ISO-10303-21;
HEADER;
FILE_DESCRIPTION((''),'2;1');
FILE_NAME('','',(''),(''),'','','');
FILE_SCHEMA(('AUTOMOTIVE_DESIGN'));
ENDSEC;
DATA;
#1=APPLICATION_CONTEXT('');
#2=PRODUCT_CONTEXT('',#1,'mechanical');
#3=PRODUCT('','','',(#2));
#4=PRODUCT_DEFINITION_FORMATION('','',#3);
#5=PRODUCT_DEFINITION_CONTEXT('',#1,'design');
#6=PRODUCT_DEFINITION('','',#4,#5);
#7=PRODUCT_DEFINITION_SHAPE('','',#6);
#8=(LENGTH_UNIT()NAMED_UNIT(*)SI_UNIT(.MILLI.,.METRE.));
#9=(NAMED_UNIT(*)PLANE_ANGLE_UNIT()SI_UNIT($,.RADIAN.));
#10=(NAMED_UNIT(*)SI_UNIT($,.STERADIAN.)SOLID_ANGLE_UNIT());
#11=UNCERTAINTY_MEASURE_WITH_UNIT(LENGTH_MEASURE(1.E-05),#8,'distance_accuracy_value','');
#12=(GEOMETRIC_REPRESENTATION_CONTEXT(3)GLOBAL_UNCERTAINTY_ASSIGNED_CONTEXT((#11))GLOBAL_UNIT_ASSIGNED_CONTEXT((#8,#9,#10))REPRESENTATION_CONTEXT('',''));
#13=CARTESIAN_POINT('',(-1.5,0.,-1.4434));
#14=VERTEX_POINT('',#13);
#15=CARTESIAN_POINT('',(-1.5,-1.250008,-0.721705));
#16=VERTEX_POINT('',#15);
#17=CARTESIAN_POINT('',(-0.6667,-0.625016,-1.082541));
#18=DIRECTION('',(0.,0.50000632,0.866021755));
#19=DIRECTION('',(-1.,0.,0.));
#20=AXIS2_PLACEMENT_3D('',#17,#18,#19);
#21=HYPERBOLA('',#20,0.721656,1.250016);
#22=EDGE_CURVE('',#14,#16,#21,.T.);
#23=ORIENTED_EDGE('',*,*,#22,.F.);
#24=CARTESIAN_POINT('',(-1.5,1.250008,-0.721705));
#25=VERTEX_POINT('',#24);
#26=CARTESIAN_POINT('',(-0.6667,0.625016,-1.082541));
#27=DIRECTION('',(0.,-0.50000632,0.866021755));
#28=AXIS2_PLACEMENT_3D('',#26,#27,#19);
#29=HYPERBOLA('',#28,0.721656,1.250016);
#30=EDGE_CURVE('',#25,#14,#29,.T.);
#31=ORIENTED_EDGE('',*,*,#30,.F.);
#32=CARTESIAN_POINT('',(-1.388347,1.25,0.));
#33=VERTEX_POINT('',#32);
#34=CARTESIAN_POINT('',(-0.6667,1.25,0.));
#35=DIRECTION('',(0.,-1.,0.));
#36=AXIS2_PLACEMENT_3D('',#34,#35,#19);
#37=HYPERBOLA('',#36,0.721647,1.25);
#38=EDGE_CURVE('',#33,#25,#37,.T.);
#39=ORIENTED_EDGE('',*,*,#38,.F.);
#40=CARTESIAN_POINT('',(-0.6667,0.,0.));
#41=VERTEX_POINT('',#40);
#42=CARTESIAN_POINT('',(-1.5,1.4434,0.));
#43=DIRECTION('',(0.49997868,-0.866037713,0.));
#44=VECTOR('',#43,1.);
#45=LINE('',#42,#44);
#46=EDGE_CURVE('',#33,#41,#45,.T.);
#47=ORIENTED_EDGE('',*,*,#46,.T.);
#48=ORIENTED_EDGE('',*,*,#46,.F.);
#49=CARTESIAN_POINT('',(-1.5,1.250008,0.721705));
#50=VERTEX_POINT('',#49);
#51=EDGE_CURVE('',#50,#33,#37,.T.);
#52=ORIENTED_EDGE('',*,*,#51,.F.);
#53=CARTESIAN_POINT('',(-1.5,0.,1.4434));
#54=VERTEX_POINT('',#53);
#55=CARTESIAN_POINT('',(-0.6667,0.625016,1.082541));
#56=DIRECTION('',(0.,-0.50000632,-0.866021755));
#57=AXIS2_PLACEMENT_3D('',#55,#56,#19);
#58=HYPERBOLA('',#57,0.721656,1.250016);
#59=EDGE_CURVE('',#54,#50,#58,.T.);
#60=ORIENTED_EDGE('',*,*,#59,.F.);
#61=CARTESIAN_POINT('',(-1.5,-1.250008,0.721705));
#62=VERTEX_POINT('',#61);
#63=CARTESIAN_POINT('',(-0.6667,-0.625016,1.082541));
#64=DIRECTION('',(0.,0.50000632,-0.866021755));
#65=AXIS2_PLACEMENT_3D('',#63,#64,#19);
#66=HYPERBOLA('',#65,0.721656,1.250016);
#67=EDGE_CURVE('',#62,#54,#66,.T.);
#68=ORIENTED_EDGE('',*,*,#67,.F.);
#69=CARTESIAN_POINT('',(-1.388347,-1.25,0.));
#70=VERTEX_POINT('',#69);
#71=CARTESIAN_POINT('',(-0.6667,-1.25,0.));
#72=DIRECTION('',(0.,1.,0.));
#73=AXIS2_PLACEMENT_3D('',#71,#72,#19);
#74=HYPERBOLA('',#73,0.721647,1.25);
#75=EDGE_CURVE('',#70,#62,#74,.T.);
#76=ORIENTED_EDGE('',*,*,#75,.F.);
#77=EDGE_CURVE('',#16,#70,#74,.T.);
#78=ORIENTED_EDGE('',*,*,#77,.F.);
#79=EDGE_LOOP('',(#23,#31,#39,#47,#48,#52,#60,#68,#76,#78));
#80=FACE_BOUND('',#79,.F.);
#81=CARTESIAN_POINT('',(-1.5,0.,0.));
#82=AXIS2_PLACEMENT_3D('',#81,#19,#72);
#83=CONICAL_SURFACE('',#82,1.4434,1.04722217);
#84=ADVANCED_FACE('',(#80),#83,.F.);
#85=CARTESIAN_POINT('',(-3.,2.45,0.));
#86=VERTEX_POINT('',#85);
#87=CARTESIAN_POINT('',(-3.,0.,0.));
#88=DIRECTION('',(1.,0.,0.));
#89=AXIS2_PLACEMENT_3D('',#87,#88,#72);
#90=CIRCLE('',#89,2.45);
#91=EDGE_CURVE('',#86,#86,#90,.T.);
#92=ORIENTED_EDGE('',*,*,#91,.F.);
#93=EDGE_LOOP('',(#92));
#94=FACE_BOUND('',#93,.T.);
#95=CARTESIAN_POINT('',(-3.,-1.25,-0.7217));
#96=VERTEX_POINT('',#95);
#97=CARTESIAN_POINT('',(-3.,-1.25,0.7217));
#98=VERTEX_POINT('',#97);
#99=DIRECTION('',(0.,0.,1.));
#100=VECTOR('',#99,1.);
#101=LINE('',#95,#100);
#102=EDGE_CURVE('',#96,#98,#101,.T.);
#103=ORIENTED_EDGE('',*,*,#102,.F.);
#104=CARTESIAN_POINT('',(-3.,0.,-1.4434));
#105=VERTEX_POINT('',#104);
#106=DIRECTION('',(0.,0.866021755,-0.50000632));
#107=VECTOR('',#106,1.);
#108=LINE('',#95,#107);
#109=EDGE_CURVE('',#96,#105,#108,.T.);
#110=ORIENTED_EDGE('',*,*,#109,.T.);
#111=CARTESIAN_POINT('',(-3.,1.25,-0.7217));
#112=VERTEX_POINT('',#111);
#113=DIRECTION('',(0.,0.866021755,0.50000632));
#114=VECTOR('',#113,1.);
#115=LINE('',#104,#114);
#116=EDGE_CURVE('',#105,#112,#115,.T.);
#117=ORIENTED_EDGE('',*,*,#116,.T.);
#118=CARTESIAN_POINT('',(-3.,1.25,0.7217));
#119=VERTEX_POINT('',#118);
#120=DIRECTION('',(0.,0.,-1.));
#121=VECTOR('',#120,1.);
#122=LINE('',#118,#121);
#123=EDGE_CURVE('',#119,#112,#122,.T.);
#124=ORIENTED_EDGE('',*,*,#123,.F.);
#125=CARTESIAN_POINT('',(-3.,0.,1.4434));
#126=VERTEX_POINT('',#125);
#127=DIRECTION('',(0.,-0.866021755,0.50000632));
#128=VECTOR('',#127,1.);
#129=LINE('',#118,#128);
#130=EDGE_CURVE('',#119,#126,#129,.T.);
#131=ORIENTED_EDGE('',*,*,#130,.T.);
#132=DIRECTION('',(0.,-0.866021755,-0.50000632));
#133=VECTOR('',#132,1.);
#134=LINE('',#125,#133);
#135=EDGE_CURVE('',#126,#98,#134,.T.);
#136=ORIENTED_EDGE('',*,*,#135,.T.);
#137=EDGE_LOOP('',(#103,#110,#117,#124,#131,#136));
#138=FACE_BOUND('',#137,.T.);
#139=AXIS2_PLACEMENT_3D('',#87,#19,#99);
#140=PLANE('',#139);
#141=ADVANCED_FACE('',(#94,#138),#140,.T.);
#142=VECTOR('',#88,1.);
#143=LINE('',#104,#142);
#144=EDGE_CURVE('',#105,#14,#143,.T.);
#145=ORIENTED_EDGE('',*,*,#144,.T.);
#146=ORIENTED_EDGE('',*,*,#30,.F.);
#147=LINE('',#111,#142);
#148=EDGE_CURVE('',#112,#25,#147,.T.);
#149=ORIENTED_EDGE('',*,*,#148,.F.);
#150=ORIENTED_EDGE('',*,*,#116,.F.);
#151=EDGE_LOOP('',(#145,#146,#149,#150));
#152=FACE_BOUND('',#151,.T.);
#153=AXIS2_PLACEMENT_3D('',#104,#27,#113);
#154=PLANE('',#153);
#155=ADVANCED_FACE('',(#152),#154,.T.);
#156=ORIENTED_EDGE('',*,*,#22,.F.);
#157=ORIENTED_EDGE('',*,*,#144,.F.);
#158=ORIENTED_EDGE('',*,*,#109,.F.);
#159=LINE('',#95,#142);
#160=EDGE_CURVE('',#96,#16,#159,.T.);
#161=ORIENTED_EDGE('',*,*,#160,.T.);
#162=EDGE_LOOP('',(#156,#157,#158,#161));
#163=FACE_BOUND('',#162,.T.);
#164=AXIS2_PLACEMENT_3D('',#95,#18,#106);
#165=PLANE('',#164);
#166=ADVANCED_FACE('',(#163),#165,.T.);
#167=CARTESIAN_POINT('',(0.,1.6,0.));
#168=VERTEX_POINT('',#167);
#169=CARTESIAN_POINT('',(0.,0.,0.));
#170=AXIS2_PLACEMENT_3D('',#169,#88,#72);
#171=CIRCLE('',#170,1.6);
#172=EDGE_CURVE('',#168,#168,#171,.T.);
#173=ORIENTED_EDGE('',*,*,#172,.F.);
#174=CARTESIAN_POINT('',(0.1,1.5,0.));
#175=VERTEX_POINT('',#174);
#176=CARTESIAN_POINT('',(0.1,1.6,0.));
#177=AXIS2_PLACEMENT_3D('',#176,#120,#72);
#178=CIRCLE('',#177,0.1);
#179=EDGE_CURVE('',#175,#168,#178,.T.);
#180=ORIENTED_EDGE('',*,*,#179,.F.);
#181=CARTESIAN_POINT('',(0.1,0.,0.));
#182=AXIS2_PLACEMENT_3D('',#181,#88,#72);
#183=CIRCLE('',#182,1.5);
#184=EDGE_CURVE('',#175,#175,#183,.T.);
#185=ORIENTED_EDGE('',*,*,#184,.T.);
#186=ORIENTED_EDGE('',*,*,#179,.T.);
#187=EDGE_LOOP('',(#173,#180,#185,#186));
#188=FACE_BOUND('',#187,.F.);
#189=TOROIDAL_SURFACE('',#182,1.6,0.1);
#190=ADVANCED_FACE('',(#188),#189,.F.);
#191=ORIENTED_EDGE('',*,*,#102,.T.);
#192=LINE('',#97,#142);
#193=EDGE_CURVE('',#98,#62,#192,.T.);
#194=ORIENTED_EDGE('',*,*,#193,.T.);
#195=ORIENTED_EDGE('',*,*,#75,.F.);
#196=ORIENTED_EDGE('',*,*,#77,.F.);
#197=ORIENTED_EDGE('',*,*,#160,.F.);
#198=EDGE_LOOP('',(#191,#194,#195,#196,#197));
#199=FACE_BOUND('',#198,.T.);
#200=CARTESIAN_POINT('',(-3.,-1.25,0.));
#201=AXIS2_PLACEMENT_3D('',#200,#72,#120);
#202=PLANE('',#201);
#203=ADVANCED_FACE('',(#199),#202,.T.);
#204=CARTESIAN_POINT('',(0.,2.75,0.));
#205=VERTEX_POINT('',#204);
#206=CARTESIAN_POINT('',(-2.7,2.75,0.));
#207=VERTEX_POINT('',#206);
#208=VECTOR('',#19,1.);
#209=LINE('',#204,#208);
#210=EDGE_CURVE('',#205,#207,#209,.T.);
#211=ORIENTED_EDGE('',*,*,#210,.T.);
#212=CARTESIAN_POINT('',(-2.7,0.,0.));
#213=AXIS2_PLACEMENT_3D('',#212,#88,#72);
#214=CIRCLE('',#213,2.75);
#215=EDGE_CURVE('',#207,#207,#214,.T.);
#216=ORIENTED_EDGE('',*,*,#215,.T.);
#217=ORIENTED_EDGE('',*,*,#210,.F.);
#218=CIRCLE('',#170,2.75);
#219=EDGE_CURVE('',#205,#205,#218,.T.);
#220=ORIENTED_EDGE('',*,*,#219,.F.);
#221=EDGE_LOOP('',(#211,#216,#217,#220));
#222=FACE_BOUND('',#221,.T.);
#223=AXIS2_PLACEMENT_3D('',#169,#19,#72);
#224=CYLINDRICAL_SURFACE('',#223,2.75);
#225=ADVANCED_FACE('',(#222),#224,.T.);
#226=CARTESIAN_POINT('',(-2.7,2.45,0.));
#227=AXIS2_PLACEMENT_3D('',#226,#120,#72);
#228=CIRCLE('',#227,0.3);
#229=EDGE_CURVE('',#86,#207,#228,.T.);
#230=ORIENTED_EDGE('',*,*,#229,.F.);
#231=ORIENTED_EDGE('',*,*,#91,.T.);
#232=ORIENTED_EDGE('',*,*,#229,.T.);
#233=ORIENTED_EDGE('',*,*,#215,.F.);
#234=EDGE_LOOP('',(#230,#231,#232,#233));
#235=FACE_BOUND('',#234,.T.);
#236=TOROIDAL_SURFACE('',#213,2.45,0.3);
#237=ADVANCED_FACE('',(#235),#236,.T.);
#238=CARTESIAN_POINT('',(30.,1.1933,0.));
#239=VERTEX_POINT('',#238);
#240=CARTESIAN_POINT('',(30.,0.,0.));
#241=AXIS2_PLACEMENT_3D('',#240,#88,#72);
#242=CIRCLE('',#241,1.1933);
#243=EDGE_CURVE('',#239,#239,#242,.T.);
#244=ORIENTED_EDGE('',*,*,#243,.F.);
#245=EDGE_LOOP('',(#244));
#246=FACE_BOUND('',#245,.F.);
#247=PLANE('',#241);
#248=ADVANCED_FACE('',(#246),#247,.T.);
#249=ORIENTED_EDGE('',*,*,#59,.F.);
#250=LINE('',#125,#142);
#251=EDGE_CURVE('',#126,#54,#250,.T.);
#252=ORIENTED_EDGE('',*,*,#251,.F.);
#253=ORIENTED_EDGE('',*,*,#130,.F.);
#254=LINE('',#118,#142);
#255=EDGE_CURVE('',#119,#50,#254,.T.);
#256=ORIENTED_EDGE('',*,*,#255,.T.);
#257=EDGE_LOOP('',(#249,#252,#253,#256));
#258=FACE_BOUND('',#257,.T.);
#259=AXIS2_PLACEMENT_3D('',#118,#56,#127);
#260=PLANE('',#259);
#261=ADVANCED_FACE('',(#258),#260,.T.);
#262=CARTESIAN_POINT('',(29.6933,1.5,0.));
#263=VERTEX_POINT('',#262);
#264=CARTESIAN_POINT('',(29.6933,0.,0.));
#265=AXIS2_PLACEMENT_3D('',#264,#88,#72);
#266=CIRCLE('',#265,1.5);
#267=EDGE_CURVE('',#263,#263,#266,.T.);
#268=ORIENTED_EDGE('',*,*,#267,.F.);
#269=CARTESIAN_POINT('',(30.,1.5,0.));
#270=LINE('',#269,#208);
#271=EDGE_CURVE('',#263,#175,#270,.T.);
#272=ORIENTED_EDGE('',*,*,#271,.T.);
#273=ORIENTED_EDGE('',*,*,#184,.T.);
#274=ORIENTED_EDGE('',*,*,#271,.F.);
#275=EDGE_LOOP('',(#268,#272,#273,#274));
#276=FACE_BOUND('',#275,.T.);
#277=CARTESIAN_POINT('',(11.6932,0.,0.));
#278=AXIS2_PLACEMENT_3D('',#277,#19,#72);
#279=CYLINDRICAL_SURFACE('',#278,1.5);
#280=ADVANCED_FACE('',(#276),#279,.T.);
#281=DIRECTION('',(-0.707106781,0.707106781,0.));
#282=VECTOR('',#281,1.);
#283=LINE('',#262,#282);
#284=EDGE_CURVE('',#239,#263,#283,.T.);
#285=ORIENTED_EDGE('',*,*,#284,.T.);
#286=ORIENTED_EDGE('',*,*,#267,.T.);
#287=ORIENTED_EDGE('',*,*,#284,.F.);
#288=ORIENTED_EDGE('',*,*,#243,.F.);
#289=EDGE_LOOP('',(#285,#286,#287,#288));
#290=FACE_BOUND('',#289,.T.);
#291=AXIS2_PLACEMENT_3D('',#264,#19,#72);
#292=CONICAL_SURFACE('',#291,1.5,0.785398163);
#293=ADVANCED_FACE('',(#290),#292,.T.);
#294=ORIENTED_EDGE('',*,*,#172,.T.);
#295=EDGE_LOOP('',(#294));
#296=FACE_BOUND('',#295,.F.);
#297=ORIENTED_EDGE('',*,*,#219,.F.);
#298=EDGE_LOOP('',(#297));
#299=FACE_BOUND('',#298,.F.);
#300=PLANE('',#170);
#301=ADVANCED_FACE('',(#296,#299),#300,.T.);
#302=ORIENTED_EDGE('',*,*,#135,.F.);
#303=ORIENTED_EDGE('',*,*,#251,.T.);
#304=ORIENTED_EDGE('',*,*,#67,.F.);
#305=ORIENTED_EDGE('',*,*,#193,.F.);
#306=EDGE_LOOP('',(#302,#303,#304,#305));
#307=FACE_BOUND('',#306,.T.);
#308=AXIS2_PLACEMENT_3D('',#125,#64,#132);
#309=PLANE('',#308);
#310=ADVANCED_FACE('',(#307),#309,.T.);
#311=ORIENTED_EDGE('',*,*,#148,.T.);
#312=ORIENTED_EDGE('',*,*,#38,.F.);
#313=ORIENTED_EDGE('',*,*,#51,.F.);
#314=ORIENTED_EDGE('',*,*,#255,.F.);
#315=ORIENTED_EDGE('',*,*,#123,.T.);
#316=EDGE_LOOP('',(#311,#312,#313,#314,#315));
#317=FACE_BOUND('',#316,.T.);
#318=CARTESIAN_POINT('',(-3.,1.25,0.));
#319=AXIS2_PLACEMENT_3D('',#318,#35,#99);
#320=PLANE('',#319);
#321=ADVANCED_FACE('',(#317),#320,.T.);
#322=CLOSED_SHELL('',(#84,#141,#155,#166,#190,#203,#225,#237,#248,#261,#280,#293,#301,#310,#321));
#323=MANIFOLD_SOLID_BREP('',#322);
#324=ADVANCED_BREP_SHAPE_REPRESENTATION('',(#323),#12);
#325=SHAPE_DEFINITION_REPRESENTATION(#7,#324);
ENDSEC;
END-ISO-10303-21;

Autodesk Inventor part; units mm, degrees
ref_plane "YZ Plane" through (0, 0, 0) normal (1, 0, 0) x (0, 1, 0)
ref_plane "XZ Plane" through (0, 0, 0) normal (0, 1, 0) x (-1, 0, 0)
sketch "Esquisse1" plane through (0, 0, 0) normal (0, 0, 1) x (1, 0, 0)
  line L0 (-0.6667, 0) -> (30, 0)
  line L1 (30, 0) -> (30, 1.5)
  line L2 (30, 1.5) -> (12, 1.5)
  line L3 (12, 1.5) -> (11.6932, 1.5)
  line L4 (11.6932, 1.5) -> (0, 1.5)
  line L5 (0, 1.5) -> (0, 2.75)
  line L6 (0, 2.75) -> (-3, 2.75)
  line L7 (-3, 2.75) -> (-3, 1.4434)
  line L8 (-3, 1.4434) -> (-1.5, 1.4434)
  line L9 (-1.5, 1.4434) -> (-0.6667, 0)
  line L10 (-9.6, 0) -> (36.6, 0) projected
  line L11 (0, -0.55) -> (0, 3.3) projected
  line L12 (12, 1.5) -> (0, 1.5) construction
  dimension "d1" = 18
  dimension "d2" = 0.3068
  dimension "d3" = 3
  dimension "d4" = 1.5
  dimension "d5" = 60
  dimension "d6" = 3
  dimension "d7" = 3
  dimension "d8" = 2.8868
  dimension "d9" = 5.5
  dimension "d26" = 30
revolve "Corps" add sketch "Esquisse1" angle 360 about axis through (-0.6667, 0, 0) along (1, 0, 0)
sketch "Esquisse2" plane through (-3, 0, 0) normal (-1, 0, 0) x (0, 0, 1)
  circle A0 centre (0, 0) radius 1.4434 projected
  line L0 (0, -3.85) -> (0, 3.85) projected
  line L1 (-3.85, 0) -> (3.85, 0) projected
  line L2 (1.4434, 0) -> (0.7217, -1.25)
  line L3 (0.7217, -1.25) -> (-0.7217, -1.25)
  line L4 (-0.7217, -1.25) -> (-1.4434, 0)
  line L5 (-1.4434, 0) -> (-0.7217, 1.25)
  line L6 (-0.7217, 1.25) -> (0.7217, 1.25)
  line L7 (0.7217, 1.25) -> (1.4434, 0)
extrude "Rainure" add sketch "Esquisse2" against normal up to next contours L7 A0 | A0 L2 | L6 L0 A0 | A0 L0 L3 | L0 L6 A0 | A0 L3 L0 | L4 A0 | A0 L5
fillet "Congé1" radius 0.3 1 edges at (-3, -2.75, 0)
thread "Filetage" size "M3x0.5" class "6g" standard "ISO Metric profile" length 18
chamfer "Chanfrein1" distance 0.3067 distance2 0.3067 1 edges at (30, -1.5, 0) measured on face at (30, -0.3888, 0.2119)
ref_plane "Work Plane1" through (29, 0, 0) normal (0, -1, 0) x (1, 0, 0)
fillet "Fillet2" radius 0.1 1 edges at (0, -1.5, 0)
equation "\"d30\" = R"
equation "\"d17\" = RR"
equation "\"d13\" = GEL"
equation "\"d15\" = -0.5 * SPD + 0.5 * GD"
equation "\"d16\" = GUL"
equation "\"d1\" = GEL"
equation "\"d3\" = KOH"
equation "\"d4\" = INTI"
equation "\"d6\" = GD"
equation "\"d7\" = BDM"
equation "\"d8\" = 1.1547 * SW"
equation "\"d9\" = KOD"
equation "\"d26\" = NLG"
equation "\"GD\" = NND"
equation "\"NLG\" = 30"
equation "\"GEL\" = 18"
equation "\"KOD\" = 5.5"
equation "\"KOH\" = 3"
equation "\"INTI\" = 1.5"
equation "\"GAL\" = 0.61345 * PTC"
equation "\"GUL\" = 0.61345 * PTC"
equation "\"BDM\" = NND"
equation "\"SW\" = 2.5"
equation "\"RR\" = 0.3"
equation "\"SPD\" = 2.38655"
equation "\"R\" = 0.1"
equation "\"TOA\" = 30deg"
equation "\"THREADDIA\" = 3"
equation "\"PTC\" = 0.5"
equation "\"NND\" = 3"
equation "\"E0\" = 1.155 * SW"
equation "\"GD1\" = THREADDIA - 1.2269 * PTC"
properties part number "ANSI B18.3.1M - M3x0,5 x 30, FSHCSM" material "Acier, doux"
